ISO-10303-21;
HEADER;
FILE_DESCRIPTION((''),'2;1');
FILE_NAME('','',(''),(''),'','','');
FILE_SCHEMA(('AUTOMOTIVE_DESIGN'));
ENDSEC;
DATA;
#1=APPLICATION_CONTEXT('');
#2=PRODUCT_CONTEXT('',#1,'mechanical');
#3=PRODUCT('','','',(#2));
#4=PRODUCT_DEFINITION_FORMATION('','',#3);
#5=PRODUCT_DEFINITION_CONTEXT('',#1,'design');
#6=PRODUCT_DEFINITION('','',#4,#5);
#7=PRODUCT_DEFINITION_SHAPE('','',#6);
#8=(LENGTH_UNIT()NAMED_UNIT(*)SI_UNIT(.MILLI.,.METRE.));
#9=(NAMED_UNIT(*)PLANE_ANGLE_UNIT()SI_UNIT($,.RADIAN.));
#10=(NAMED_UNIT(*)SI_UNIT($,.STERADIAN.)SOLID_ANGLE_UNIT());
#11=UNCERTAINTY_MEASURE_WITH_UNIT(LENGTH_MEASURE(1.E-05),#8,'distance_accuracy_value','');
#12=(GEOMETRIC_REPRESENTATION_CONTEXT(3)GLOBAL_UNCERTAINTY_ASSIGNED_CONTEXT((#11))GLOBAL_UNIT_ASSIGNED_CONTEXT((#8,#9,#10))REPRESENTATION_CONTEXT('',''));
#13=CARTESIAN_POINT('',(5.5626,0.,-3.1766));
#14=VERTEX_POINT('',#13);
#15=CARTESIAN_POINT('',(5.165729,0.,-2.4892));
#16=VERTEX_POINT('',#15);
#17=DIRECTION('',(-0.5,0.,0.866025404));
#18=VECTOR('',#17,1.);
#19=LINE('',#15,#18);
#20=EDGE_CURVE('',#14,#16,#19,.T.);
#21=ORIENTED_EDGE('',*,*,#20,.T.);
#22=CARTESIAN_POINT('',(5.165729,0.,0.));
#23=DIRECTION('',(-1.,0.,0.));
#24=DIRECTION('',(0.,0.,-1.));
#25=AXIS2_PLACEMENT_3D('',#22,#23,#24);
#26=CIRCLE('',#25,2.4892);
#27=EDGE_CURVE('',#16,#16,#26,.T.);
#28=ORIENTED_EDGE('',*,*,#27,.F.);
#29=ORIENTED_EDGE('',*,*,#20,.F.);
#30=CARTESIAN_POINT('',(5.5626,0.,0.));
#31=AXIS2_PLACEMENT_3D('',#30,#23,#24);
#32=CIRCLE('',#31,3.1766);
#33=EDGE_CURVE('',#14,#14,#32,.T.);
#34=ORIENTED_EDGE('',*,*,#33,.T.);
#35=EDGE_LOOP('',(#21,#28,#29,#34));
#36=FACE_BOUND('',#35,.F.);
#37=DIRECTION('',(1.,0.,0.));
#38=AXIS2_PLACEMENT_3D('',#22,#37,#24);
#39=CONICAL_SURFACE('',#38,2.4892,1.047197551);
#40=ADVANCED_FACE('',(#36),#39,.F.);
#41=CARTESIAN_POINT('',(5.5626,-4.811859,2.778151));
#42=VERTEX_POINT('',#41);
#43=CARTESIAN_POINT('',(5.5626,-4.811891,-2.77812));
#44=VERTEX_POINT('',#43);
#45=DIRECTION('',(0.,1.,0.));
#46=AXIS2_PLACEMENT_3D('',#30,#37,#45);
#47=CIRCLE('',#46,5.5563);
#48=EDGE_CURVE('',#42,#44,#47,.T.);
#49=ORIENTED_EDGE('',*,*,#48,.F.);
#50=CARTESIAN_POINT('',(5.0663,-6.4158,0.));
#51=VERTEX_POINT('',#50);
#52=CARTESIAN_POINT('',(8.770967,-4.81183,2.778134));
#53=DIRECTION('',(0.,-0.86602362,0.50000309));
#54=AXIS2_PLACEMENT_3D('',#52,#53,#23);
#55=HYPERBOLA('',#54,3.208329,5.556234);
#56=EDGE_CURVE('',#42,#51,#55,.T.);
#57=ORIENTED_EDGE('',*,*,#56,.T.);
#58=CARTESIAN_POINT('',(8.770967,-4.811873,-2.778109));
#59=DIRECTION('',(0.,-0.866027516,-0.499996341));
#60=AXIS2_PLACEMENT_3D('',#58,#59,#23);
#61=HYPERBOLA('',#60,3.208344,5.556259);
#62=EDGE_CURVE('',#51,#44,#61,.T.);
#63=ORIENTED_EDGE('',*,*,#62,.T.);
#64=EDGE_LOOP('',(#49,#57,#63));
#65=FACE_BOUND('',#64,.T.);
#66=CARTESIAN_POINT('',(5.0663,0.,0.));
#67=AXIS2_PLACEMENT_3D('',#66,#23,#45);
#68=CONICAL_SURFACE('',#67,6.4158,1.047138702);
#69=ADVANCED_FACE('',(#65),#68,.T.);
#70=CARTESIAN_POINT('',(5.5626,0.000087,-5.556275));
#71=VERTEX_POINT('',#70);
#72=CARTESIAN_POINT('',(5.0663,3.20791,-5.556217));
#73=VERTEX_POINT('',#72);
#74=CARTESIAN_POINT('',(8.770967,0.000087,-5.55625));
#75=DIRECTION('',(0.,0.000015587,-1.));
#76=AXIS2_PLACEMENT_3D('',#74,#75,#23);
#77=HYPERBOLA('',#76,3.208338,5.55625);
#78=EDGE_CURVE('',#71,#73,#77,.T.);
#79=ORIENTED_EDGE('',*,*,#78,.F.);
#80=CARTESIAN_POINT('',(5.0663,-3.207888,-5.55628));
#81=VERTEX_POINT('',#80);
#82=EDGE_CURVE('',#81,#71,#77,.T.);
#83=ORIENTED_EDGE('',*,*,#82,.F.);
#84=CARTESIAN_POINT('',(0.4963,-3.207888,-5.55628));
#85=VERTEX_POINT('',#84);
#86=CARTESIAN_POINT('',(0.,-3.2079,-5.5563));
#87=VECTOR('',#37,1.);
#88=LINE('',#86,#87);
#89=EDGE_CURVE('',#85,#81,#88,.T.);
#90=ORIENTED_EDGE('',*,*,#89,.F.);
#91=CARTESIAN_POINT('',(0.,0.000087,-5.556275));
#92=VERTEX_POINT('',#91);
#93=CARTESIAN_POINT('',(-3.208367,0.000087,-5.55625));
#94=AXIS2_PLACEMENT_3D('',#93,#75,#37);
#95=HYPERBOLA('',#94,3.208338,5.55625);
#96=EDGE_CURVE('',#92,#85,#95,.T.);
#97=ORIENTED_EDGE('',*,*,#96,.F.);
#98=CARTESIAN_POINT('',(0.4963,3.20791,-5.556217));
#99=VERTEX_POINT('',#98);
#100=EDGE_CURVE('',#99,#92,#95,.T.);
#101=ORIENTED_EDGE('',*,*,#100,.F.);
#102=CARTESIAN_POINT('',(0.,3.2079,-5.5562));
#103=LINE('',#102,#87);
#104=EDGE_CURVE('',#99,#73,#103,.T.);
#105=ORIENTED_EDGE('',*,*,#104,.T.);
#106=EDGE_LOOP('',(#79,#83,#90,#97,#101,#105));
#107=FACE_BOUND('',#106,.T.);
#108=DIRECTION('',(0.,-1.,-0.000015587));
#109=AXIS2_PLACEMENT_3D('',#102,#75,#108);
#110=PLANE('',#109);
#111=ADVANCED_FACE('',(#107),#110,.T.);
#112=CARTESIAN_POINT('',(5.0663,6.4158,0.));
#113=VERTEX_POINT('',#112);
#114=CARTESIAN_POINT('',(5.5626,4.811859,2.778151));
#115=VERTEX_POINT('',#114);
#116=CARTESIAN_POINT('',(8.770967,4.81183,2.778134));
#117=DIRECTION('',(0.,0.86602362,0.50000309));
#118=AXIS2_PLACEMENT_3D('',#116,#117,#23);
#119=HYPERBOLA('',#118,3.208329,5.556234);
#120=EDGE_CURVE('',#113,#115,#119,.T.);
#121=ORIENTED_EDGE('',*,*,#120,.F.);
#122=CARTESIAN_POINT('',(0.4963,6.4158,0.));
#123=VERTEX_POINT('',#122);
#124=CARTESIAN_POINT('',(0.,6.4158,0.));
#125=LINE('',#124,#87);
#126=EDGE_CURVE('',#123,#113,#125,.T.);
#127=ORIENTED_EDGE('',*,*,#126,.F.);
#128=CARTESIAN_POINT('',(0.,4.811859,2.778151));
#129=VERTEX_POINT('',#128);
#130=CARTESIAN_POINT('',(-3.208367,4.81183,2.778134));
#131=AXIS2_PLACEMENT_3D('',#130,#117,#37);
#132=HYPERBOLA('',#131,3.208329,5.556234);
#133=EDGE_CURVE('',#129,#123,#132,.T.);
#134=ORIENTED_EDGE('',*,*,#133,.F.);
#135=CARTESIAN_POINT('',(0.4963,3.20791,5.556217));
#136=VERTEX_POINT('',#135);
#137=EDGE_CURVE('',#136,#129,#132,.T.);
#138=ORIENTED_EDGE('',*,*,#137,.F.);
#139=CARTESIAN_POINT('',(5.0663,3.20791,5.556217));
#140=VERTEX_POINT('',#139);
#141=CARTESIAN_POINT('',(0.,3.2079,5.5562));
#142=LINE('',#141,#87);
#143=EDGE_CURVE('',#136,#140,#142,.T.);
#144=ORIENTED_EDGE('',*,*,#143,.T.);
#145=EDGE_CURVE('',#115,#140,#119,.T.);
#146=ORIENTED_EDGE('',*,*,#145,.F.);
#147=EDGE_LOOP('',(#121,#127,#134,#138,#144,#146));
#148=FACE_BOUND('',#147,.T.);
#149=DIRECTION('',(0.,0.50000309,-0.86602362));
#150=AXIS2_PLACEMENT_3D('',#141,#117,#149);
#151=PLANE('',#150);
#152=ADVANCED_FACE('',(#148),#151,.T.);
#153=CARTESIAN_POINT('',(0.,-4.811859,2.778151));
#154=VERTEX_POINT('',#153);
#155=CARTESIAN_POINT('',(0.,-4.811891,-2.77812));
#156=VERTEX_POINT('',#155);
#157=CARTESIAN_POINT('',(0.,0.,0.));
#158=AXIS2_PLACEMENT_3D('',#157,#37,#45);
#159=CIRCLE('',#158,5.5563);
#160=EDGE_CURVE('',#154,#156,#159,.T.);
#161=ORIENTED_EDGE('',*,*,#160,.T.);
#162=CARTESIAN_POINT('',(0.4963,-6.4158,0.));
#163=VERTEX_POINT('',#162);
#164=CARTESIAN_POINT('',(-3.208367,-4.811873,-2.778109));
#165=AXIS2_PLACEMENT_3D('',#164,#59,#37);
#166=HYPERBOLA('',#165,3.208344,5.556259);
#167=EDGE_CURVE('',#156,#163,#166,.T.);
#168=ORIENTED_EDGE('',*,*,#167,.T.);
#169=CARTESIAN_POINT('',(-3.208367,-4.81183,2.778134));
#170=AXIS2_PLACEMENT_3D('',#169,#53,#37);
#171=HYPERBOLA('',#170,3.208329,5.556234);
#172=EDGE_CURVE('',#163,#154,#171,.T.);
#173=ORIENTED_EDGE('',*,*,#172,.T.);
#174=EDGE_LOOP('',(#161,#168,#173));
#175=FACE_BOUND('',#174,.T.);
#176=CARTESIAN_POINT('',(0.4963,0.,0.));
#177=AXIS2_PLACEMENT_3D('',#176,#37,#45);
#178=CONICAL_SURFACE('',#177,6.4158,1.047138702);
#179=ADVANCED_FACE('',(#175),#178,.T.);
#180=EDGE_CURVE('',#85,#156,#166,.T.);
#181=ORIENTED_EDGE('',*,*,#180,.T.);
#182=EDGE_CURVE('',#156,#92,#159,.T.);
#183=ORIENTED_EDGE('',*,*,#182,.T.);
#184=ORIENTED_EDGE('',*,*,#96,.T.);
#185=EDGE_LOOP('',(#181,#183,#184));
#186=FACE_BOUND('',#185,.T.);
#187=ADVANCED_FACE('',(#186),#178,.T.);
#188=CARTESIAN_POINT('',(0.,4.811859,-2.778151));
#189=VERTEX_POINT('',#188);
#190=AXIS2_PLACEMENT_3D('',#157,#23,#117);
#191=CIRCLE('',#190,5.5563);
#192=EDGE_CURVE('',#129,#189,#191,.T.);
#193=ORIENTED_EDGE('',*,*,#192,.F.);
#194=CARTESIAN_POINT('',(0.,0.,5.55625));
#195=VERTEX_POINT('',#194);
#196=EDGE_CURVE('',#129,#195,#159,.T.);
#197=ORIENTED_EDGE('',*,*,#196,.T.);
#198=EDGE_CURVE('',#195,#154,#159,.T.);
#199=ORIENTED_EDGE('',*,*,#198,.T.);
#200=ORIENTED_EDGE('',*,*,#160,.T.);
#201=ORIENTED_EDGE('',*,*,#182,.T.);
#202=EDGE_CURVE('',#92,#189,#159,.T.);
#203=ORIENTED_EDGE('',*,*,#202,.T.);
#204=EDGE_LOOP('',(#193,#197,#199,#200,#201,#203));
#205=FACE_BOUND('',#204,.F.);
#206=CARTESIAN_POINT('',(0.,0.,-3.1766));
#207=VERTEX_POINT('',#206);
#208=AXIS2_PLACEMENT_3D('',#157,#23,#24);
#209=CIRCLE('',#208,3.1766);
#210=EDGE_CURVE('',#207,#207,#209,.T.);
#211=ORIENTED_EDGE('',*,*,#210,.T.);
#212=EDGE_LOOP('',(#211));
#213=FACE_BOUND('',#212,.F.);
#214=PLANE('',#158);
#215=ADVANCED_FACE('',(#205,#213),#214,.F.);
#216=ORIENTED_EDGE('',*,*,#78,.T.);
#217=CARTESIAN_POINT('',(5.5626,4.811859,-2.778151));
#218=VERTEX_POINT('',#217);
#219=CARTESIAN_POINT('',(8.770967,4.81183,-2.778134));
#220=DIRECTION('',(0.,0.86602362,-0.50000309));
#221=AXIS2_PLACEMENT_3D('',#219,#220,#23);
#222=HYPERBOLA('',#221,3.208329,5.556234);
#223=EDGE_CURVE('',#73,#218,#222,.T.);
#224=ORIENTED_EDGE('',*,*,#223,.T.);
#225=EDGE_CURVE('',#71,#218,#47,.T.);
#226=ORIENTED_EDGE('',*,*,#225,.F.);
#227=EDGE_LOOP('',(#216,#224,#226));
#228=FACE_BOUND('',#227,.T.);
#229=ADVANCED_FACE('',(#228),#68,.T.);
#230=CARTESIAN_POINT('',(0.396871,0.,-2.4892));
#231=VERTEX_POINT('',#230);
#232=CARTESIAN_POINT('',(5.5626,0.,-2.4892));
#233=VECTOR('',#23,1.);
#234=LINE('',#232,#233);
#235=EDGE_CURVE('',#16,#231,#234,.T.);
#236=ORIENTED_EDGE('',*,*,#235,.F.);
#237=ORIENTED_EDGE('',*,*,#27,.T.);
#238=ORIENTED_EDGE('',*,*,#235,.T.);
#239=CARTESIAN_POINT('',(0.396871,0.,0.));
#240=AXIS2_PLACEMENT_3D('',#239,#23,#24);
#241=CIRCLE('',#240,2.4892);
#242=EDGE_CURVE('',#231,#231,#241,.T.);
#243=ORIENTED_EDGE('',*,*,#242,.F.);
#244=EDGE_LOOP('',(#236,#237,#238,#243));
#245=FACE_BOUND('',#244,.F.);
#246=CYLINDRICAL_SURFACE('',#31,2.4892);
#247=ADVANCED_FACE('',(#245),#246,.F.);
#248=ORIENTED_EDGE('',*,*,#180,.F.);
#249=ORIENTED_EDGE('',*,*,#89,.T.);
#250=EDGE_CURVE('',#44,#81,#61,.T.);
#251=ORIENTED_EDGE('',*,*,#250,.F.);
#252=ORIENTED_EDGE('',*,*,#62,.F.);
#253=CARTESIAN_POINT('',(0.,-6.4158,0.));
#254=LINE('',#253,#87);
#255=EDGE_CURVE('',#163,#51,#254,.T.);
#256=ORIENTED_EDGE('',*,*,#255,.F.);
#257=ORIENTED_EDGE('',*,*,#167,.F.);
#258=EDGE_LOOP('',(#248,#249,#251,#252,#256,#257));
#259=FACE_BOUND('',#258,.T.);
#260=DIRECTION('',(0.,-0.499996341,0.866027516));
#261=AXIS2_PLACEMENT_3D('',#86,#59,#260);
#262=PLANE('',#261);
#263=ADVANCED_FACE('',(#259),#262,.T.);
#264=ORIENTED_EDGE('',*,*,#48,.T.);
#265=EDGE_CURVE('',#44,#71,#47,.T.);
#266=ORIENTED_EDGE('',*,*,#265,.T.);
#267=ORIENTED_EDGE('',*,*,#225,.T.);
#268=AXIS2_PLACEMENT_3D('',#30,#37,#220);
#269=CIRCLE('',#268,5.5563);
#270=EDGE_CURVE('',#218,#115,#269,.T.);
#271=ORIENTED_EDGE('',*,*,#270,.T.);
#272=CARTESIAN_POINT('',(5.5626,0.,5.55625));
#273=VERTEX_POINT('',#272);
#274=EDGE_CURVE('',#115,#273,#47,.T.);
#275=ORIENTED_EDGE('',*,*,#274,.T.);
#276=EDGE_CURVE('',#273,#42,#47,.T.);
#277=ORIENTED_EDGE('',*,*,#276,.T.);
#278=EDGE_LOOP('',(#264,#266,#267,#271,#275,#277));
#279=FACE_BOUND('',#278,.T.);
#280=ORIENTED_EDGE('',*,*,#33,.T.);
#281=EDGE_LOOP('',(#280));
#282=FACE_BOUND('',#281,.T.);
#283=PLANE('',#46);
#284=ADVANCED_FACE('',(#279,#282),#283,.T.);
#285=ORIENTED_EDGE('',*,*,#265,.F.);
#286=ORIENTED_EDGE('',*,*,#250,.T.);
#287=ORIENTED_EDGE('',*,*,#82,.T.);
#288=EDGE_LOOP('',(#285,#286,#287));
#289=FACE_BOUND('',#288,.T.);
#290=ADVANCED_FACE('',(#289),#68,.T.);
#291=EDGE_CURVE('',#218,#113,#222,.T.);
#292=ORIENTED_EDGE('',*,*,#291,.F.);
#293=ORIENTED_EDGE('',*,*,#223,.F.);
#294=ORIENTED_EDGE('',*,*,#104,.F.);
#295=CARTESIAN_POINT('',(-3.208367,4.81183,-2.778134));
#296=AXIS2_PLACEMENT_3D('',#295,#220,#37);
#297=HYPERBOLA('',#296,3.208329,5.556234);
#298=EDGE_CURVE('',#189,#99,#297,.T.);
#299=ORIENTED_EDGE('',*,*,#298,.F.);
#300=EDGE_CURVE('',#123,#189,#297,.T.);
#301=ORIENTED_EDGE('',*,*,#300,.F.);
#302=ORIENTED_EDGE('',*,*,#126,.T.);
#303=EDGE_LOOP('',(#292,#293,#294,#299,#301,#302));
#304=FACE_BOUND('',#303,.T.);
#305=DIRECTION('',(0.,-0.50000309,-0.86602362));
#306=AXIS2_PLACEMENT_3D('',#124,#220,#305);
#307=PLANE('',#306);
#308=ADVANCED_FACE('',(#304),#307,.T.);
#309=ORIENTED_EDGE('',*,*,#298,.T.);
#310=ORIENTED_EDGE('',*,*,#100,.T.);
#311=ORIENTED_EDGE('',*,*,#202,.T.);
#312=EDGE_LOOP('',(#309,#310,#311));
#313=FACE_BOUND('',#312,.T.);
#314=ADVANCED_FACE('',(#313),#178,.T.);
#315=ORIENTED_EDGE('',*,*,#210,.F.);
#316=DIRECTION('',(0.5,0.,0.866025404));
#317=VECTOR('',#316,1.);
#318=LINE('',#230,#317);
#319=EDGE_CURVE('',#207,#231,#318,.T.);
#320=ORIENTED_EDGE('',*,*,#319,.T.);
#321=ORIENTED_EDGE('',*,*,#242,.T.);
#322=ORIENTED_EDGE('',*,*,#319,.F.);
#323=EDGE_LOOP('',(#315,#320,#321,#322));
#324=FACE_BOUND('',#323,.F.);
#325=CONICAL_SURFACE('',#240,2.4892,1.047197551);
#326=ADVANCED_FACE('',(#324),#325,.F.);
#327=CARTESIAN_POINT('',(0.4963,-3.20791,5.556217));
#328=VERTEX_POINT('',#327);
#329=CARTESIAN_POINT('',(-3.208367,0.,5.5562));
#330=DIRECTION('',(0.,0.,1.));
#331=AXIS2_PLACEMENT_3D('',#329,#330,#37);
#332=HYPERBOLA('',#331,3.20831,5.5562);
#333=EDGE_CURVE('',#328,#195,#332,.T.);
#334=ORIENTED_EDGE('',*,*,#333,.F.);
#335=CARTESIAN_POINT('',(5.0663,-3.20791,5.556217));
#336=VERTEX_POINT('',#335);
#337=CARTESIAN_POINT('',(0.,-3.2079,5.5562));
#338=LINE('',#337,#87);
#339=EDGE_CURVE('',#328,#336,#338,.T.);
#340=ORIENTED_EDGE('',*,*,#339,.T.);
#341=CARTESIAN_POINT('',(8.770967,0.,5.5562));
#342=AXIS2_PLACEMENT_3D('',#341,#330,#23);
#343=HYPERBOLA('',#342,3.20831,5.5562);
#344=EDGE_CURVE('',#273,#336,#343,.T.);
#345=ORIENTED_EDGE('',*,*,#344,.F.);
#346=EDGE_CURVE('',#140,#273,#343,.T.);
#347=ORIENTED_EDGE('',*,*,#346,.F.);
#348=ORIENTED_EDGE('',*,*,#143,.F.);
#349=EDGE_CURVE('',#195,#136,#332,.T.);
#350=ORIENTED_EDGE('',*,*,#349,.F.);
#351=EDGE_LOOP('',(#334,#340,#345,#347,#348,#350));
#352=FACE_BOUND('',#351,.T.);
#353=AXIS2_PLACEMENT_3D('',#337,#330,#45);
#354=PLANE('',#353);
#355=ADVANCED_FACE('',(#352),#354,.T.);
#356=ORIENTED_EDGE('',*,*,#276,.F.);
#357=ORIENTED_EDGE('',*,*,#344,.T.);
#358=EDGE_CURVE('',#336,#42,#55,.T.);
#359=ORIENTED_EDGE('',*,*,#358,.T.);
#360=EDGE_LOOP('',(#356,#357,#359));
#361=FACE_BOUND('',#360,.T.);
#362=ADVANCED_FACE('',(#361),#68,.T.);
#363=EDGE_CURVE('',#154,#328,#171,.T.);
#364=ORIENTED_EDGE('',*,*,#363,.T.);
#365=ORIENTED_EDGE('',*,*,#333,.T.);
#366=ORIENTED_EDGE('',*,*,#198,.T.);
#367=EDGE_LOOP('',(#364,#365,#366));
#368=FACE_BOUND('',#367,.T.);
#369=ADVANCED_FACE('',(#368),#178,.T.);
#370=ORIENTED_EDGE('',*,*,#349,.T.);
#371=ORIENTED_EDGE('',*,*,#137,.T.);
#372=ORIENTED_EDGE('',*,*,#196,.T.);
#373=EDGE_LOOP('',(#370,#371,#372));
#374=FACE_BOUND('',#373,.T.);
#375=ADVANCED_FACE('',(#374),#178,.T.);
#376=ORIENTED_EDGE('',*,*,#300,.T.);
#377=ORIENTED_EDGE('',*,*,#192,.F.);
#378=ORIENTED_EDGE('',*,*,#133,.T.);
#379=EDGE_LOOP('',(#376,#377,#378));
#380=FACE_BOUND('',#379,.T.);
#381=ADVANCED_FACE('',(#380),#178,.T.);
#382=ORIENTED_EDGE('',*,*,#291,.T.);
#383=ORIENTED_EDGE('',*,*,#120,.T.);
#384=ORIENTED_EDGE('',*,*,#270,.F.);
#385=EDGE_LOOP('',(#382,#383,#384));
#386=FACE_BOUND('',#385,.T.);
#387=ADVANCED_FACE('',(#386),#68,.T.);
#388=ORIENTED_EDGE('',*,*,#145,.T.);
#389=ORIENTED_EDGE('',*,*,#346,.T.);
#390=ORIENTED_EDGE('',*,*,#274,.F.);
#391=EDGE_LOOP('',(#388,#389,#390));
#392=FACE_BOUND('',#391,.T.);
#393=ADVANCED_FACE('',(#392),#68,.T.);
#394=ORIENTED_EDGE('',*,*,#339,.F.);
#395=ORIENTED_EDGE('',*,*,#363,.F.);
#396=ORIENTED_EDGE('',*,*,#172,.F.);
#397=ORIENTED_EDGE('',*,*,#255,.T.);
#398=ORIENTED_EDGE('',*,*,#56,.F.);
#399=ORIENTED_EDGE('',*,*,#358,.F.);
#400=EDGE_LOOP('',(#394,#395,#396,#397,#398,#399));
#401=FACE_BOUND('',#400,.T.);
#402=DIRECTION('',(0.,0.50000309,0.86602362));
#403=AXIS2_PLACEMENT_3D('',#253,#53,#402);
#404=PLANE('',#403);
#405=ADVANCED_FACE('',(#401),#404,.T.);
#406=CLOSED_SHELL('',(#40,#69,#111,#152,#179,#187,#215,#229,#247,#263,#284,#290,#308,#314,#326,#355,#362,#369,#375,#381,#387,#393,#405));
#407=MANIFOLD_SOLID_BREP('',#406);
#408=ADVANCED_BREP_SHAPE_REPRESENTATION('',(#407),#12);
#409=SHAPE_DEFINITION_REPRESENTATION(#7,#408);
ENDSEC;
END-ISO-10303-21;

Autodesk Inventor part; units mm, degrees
ref_plane "YZ Plane" through (0, 0, 0) normal (1, 0, 0) x (0, 1, 0)
ref_plane "XZ Plane" through (0, 0, 0) normal (0, 1, 0) x (-1, 0, 0)
ref_plane "XY Plane" through (0, 0, 0) normal (0, 0, 1) x (1, 0, 0)
sketch "Sketch1" plane through (0, 0, 0) normal (1, 0, 0) x (0, 1, 0)
  line L0 (-6.4158, 0) -> (-3.2079, 5.5562)
  line L1 (-3.2079, 5.5562) -> (3.2079, 5.5562)
  line L2 (3.2079, 5.5562) -> (6.4158, 0)
  line L3 (6.4158, 0) -> (3.2079, -5.5562)
  line L4 (3.2079, -5.5562) -> (-3.2079, -5.5563)
  line L5 (-3.2079, -5.5563) -> (-6.4158, 0)
  point P0 (0, 0)
  point P1 (0, 0)
  dimension "d0" = 12.8316
extrude "Body" add sketch "Sketch1" along normal blind 5.5626
sketch "Sketch2" plane through (0, 0, 0) normal (0, 0, 1) x (1, 0, 0)
  line L0 (0, 3.2079) -> (0, 6.4158) projected
  line L1 (0, 6.4158) -> (5.5626, 6.4158) projected
  line L2 (5.5626, 3.2079) -> (5.5626, 6.4158) projected
  line L3 (-0.5563, 0) -> (7.2314, 0) projected
  line L4 (0.4963, 6.4158) -> (0, 5.5563)
  line L5 (5.0663, 6.4158) -> (5.5626, 5.5563)
  dimension "d3" = 30
  dimension "d4" = 30
  dimension "d5" = 11.1125
  dimension "d6" = 11.1125
revolve "Chamfer1" cut sketch "Sketch2" angle 360 about axis through (-10, 0, 0) along (1, 0, 0)
sketch "Sketch3" plane through (5.5626, 0, 0) normal (1, 0, 0) x (0, 0, -1)
  arc A0 (-2.7781, -4.8119) -> (2.7781, -4.8119) centre (0, 0) ccw projected
hole "Thread" at (5.5626, 0, 0) direction (-1, 0, 0) diameter 4.9784 end through all thread size "1/4-20 UNC" class "2B" standard "ANSI Unified Screw Threads"
chamfer "Chamfer2" distance 0.6874 angle 30 1 edges at (5.5626, 0, 2.4892) measured on face at (5.5626, 4.5076, -0.1)
chamfer "Chamfer3" distance 0.6874 angle 30 1 edges at (0, 0, 2.4892) measured on face at (0, 4.5076, -0.1)
equation "\"d0\" = 1.1547 * SW"
equation "\"d1\" = KOH"
equation "\"d3\" = ANG1"
equation "\"d4\" = ANG2"
equation "\"d5\" = SW0"
equation "\"d6\" = SW01"
equation "\"d8\" = -0.5 * GD1 + 0.5 * NND"
equation "\"d40\" = -0.5 * GD1 + 0.5 * NND"
equation "\"d10\" = -0.5 * GD1 + 0.5 * NND"
equation "\"d41\" = -0.5 * GD1 + 0.5 * NND"
equation "\"ANG1\" = 30deg"
equation "\"ANG2\" = 30deg"
equation "\"NND\" = 6.35"
equation "\"KOH\" = 5.5626"
equation "\"SW\" = 11.1125"
equation "\"SW0\" = SW"
equation "\"SW01\" = SW"
equation "\"TOA\" = 30deg"
equation "\"THREADDIA\" = 6.35"
equation "\"E0\" = 1.155 * SW"
equation "\"GD1\" = 4.975185"
properties part number "ANSI B18.2.2 - 1/4 - 20" material "Steel, High Strength Low Alloy"
